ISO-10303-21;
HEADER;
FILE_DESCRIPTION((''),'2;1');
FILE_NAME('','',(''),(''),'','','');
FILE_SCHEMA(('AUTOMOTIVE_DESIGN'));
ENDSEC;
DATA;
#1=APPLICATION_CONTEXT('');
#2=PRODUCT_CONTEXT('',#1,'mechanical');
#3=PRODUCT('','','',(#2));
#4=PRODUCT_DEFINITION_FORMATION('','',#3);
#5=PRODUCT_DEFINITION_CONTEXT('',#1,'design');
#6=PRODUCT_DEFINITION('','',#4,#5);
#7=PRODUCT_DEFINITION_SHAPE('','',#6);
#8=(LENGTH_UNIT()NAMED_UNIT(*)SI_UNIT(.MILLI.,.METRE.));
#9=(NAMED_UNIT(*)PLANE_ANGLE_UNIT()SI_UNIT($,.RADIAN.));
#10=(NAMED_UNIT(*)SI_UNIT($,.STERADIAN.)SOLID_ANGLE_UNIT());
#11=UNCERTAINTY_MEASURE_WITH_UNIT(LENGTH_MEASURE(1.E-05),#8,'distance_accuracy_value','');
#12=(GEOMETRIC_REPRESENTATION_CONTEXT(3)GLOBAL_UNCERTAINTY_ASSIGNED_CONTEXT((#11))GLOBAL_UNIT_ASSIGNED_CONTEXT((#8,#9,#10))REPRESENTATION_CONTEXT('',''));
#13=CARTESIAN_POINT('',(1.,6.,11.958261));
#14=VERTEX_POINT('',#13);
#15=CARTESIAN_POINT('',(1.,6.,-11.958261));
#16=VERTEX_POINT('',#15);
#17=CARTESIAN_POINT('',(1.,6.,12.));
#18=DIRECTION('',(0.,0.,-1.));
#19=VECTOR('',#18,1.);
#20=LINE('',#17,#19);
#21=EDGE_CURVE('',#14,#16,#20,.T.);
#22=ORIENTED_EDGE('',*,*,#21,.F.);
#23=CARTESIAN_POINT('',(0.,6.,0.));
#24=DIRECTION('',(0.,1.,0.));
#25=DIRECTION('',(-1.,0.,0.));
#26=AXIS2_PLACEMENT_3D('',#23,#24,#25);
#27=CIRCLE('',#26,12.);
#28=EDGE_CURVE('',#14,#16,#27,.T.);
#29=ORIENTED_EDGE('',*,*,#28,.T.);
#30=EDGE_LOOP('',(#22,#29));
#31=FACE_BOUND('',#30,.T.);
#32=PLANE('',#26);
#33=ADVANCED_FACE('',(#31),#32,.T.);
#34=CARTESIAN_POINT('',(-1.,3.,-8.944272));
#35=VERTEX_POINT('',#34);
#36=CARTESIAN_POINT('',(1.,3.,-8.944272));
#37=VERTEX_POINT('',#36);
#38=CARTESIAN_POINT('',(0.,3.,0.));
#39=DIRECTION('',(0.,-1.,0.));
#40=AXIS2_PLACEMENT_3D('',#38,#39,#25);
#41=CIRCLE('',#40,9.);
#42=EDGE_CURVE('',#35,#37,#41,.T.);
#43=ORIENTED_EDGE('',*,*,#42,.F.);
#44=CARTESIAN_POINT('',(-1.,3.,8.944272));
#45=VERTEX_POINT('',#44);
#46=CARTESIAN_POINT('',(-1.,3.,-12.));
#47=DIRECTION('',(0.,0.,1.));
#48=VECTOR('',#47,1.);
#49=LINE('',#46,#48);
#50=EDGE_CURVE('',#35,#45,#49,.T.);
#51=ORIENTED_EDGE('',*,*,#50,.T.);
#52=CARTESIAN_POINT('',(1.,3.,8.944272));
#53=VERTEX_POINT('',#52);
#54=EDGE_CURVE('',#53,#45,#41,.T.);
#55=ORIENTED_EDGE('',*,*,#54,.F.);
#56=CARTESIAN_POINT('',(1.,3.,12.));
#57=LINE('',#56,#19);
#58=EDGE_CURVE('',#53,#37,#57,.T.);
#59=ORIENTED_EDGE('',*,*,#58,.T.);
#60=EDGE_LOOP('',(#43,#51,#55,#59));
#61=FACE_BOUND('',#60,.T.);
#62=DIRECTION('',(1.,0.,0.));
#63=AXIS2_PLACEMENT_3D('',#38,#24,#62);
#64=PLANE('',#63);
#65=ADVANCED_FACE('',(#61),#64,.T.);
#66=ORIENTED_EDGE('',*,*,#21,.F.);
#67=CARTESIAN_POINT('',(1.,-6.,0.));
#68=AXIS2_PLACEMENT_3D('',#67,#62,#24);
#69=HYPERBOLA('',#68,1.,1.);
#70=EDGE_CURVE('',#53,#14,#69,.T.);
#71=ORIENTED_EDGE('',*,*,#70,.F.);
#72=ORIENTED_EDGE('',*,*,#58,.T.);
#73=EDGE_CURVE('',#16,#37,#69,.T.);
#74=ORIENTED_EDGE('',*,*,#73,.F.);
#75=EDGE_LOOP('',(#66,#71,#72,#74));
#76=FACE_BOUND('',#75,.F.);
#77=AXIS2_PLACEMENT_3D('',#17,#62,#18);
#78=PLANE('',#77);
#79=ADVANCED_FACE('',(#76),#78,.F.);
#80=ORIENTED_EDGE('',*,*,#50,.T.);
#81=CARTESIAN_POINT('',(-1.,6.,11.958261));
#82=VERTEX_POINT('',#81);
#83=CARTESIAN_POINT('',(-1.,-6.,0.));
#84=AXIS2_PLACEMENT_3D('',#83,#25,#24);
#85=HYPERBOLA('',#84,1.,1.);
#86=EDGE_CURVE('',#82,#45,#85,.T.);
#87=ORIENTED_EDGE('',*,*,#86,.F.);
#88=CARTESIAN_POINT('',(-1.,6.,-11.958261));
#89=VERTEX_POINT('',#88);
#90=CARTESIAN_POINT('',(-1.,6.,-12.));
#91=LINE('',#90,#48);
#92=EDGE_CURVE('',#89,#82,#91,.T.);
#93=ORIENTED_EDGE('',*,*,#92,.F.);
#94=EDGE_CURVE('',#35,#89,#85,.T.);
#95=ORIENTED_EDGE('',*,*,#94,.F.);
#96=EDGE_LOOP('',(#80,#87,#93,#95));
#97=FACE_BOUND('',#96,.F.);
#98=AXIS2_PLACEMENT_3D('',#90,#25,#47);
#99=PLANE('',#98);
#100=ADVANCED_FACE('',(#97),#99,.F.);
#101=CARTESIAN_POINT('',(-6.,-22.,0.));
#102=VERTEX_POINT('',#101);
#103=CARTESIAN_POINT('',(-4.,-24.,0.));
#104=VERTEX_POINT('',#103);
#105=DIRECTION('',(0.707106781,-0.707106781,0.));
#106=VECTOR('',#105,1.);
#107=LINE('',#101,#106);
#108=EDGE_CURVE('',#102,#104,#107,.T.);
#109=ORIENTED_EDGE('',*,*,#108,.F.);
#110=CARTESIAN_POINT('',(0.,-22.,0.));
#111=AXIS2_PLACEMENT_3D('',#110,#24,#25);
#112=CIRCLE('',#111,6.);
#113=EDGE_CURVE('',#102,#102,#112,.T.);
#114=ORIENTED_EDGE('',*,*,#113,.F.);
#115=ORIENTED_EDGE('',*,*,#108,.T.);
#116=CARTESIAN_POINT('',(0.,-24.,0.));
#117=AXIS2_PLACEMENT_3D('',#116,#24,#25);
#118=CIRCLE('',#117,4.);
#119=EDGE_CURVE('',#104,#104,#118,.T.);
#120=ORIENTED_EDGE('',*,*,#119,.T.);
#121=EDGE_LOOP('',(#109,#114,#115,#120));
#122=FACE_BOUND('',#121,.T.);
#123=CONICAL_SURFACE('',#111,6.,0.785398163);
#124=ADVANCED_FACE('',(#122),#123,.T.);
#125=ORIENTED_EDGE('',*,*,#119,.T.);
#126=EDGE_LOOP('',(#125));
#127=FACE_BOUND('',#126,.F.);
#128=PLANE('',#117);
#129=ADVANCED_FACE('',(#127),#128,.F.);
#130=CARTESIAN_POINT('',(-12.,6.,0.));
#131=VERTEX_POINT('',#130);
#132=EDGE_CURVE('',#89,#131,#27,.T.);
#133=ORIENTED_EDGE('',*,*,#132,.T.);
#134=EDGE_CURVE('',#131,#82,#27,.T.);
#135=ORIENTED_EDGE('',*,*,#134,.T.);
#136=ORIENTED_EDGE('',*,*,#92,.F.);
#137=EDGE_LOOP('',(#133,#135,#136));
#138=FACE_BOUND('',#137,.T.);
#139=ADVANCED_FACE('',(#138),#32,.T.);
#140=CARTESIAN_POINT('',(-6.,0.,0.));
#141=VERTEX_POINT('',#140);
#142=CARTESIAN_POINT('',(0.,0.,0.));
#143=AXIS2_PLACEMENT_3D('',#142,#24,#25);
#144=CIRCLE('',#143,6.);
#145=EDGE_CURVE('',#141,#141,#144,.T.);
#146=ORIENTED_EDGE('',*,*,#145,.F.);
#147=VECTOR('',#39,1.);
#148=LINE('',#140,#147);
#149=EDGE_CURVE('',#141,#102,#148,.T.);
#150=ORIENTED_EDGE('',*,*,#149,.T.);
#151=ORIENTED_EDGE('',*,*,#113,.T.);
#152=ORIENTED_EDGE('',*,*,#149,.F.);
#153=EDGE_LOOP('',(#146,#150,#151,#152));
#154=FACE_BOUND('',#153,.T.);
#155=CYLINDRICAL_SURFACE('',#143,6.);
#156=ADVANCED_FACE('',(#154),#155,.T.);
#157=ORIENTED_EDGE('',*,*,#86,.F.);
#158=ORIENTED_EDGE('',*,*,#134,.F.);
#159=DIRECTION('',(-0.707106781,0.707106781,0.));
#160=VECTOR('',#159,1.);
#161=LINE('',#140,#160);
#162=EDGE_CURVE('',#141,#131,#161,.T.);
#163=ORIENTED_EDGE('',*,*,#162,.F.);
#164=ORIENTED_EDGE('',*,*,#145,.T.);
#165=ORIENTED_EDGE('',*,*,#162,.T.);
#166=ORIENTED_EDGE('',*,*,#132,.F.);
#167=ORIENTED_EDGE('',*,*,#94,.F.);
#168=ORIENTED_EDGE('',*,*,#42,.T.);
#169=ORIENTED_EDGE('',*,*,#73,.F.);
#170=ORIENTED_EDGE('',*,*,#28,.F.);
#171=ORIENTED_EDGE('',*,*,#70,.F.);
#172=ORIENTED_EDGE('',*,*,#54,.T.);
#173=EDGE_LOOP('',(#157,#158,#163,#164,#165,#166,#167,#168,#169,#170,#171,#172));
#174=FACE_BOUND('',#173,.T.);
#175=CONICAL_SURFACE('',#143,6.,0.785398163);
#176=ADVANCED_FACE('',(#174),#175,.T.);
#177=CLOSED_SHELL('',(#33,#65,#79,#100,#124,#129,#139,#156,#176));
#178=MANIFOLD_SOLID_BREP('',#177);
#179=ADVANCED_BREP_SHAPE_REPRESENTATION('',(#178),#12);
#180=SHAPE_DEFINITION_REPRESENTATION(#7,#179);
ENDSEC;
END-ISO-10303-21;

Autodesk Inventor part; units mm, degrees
ref_plane "YZ Plane" through (0, 0, 0) normal (1, 0, 0) x (0, 1, 0)
ref_plane "XZ Plane" through (0, 0, 0) normal (0, 1, 0) x (-1, 0, 0)
ref_plane "XY Plane" through (0, 0, 0) normal (0, 0, 1) x (1, 0, 0)
sketch "Sketch1" plane through (0, 0, 0) normal (0, 1, 0) x (-1, 0, 0)
  circle A0 centre (0, 0) radius 6
  dimension "d0" = 12
extrude "Extrusion1" add sketch "Sketch1" along normal blind 6 draft 45
extrude "Extrusion2" add sketch "Sketch1" against normal blind 24
chamfer "Chamfer1" distance 2 angle 45 1 edges at (6, -24, 0)
thread "Thread1" size "M12x1.75" class "6g" standard "ANSI Metric M Profile" length 155 offset 3
sketch "Sketch2" plane through (0, 6, 0) normal (0, 1, 0) x (1, 0, 0)
  line L0 (1, -12) -> (1, 12)
  line L1 (1, 12) -> (-1, 12)
  line L2 (-1, 12) -> (-1, -12)
  line L3 (-1, -12) -> (1, -12)
  line L4 (1, -12) -> (-1, 12) construction
  line L5 (1, 12) -> (-1, -12) construction
  point P0 (0, 0)
  dimension "d10" = 2
extrude "Extrusion3" cut sketch "Sketch2" against normal blind 3
properties part number "csk.screw" material "Steel, High Strength, Low Alloy"
